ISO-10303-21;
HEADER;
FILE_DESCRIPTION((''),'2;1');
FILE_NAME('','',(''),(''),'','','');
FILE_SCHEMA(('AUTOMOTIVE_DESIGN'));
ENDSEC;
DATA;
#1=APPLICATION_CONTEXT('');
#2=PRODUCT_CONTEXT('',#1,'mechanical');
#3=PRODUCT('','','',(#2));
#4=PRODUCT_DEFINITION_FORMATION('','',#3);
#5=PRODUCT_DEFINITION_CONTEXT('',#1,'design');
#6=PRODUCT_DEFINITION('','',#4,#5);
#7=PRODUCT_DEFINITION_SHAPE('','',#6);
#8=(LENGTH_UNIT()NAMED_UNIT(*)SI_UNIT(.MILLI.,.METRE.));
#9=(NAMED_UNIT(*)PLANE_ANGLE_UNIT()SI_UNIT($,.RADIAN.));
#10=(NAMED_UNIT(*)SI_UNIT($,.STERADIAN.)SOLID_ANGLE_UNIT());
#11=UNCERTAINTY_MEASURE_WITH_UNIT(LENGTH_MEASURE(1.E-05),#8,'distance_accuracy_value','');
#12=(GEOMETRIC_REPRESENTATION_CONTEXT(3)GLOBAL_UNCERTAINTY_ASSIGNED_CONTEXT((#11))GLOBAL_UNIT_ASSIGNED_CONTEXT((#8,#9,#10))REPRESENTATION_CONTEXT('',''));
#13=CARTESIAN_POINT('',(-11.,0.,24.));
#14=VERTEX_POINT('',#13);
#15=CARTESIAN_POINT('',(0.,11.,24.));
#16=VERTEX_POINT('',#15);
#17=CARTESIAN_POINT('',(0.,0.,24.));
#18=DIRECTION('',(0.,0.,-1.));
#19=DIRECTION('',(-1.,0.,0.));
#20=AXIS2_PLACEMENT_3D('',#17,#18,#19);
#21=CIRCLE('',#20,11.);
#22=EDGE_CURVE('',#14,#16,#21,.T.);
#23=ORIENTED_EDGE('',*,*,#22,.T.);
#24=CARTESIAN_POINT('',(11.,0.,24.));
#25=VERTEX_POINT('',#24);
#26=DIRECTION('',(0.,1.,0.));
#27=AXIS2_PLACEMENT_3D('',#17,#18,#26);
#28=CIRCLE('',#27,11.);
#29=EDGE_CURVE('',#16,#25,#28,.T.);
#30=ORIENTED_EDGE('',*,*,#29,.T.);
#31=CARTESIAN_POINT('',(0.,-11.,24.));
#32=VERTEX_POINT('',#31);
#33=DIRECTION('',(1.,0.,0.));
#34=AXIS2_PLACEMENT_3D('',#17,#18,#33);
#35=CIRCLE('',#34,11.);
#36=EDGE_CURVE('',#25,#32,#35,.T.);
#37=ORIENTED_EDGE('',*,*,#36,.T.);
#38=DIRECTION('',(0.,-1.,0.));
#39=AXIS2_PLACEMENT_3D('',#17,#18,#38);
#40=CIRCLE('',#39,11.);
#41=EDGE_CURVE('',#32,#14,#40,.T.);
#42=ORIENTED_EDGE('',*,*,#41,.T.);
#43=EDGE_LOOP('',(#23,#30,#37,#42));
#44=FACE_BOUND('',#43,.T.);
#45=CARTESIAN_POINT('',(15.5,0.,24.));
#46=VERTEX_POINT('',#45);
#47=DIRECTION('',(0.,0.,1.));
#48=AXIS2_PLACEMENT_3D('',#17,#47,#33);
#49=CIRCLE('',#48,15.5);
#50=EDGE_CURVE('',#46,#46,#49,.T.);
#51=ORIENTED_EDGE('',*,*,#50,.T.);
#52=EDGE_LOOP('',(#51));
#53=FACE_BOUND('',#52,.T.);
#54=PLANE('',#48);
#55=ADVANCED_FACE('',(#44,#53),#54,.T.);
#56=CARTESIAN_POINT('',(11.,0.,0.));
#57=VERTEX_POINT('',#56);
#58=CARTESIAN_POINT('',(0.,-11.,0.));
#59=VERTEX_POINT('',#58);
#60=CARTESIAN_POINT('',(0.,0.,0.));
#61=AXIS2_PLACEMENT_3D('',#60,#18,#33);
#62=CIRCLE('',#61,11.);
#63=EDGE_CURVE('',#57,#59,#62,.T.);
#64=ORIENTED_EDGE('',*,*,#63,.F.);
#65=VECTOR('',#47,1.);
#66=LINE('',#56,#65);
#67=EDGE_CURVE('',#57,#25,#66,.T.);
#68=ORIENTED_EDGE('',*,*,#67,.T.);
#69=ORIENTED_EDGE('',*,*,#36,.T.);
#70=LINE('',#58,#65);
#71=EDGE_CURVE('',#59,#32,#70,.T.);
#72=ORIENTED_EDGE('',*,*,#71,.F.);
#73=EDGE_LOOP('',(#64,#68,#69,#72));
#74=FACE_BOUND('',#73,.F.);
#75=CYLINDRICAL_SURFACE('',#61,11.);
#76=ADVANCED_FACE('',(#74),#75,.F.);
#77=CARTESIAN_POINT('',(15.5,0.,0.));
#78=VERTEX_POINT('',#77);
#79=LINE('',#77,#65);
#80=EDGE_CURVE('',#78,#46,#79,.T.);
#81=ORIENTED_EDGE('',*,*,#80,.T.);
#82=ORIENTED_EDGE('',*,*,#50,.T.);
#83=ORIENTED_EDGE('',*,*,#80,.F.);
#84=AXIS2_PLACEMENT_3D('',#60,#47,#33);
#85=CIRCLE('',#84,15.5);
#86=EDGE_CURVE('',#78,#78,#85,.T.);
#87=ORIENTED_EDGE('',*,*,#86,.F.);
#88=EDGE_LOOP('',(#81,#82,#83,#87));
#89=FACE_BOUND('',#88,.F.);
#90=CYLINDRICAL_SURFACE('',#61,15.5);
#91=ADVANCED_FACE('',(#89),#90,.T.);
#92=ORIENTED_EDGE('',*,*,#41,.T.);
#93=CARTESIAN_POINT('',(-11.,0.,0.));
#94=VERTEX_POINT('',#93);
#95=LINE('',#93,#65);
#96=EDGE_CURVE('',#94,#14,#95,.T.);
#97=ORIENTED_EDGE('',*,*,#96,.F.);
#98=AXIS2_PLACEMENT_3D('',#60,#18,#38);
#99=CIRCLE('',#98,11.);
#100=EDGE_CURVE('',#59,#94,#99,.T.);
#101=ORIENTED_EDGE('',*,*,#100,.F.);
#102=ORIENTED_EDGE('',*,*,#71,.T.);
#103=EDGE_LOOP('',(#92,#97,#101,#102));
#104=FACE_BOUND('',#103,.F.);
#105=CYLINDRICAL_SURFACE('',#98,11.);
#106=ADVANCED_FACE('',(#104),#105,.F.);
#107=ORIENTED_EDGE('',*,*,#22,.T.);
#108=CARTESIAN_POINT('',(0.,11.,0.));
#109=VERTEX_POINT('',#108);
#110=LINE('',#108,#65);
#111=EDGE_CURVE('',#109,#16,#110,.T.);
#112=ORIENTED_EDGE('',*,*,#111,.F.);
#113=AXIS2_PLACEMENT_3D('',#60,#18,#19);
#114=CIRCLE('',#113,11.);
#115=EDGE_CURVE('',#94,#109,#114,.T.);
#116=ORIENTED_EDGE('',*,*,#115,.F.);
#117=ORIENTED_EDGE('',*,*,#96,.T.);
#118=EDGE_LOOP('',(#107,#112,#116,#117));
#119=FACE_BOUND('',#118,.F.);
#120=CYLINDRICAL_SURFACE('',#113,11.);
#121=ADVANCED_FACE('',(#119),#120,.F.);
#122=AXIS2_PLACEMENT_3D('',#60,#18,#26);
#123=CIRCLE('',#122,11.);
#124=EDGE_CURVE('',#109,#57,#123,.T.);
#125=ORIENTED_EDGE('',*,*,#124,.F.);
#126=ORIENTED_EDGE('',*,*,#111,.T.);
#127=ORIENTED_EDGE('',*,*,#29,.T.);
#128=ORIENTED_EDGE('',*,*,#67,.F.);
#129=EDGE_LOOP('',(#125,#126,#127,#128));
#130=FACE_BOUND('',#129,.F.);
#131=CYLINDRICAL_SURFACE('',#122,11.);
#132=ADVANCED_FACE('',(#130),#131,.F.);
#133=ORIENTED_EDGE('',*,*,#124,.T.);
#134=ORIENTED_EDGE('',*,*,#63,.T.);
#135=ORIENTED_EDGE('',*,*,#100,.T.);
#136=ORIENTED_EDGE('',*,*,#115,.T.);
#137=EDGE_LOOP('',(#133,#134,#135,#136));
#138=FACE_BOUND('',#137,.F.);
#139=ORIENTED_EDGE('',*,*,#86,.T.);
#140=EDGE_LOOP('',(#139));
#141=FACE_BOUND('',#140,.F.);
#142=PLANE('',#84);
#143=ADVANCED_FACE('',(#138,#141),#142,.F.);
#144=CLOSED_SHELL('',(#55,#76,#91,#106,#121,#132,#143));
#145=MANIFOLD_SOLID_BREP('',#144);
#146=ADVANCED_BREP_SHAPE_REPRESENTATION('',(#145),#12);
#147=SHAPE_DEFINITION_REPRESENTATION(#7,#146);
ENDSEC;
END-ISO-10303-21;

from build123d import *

# Parameters (mm, degrees)
F0_R     = 15.5
F1_DEPTH = 24


with BuildPart() as f1:
    # F0 (on Top) → F1 (new body)
    with BuildSketch(Plane.XY):
        Circle(F0_R)
        with BuildLine():
            ThreePointArc((0, 11.75), (8.3085046789, 8.3085046789), (11.75, 0))
            ThreePointArc((11.75, 0), (8.3085046789, -8.3085046789), (0, -11.75))
            ThreePointArc((0, -11.75), (-8.3085046789, -8.3085046789), (-11.75, 0))
            ThreePointArc((-11.75, 0), (-8.3085046789, 8.3085046789), (0, 11.75))
        make_face(mode=Mode.SUBTRACT)
        with BuildLine():
            ThreePointArc((0, 11), (7.7781745931, 7.7781745931), (11, 0))
            Line((11, 0), (11.75, 0))
            ThreePointArc((11.75, 0), (8.3085046789, 8.3085046789), (0, 11.75))
            Line((0, 11.75), (0, 11))
        make_face()
        with BuildLine():
            ThreePointArc((-11, 0), (-7.7781745931, 7.7781745931), (0, 11))
            Line((0, 11), (0, 11.75))
            ThreePointArc((0, 11.75), (-8.3085046789, 8.3085046789), (-11.75, 0))
            Line((-11.75, 0), (-11, 0))
        make_face()
        with BuildLine():
            Line((0, -11.75), (0, -11))
            ThreePointArc((0, -11), (-7.7781745931, -7.7781745931), (-11, 0))
            Line((-11, 0), (-11.75, 0))
            ThreePointArc((-11.75, 0), (-8.3085046789, -8.3085046789), (0, -11.75))
        make_face()
        with BuildLine():
            Line((11.75, 0), (11, 0))
            ThreePointArc((11, 0), (7.7781745931, -7.7781745931), (0, -11))
            Line((0, -11), (0, -11.75))
            ThreePointArc((0, -11.75), (8.3085046789, -8.3085046789), (11.75, 0))
        make_face()
    extrude(amount=F1_DEPTH)


solid = f1.part
